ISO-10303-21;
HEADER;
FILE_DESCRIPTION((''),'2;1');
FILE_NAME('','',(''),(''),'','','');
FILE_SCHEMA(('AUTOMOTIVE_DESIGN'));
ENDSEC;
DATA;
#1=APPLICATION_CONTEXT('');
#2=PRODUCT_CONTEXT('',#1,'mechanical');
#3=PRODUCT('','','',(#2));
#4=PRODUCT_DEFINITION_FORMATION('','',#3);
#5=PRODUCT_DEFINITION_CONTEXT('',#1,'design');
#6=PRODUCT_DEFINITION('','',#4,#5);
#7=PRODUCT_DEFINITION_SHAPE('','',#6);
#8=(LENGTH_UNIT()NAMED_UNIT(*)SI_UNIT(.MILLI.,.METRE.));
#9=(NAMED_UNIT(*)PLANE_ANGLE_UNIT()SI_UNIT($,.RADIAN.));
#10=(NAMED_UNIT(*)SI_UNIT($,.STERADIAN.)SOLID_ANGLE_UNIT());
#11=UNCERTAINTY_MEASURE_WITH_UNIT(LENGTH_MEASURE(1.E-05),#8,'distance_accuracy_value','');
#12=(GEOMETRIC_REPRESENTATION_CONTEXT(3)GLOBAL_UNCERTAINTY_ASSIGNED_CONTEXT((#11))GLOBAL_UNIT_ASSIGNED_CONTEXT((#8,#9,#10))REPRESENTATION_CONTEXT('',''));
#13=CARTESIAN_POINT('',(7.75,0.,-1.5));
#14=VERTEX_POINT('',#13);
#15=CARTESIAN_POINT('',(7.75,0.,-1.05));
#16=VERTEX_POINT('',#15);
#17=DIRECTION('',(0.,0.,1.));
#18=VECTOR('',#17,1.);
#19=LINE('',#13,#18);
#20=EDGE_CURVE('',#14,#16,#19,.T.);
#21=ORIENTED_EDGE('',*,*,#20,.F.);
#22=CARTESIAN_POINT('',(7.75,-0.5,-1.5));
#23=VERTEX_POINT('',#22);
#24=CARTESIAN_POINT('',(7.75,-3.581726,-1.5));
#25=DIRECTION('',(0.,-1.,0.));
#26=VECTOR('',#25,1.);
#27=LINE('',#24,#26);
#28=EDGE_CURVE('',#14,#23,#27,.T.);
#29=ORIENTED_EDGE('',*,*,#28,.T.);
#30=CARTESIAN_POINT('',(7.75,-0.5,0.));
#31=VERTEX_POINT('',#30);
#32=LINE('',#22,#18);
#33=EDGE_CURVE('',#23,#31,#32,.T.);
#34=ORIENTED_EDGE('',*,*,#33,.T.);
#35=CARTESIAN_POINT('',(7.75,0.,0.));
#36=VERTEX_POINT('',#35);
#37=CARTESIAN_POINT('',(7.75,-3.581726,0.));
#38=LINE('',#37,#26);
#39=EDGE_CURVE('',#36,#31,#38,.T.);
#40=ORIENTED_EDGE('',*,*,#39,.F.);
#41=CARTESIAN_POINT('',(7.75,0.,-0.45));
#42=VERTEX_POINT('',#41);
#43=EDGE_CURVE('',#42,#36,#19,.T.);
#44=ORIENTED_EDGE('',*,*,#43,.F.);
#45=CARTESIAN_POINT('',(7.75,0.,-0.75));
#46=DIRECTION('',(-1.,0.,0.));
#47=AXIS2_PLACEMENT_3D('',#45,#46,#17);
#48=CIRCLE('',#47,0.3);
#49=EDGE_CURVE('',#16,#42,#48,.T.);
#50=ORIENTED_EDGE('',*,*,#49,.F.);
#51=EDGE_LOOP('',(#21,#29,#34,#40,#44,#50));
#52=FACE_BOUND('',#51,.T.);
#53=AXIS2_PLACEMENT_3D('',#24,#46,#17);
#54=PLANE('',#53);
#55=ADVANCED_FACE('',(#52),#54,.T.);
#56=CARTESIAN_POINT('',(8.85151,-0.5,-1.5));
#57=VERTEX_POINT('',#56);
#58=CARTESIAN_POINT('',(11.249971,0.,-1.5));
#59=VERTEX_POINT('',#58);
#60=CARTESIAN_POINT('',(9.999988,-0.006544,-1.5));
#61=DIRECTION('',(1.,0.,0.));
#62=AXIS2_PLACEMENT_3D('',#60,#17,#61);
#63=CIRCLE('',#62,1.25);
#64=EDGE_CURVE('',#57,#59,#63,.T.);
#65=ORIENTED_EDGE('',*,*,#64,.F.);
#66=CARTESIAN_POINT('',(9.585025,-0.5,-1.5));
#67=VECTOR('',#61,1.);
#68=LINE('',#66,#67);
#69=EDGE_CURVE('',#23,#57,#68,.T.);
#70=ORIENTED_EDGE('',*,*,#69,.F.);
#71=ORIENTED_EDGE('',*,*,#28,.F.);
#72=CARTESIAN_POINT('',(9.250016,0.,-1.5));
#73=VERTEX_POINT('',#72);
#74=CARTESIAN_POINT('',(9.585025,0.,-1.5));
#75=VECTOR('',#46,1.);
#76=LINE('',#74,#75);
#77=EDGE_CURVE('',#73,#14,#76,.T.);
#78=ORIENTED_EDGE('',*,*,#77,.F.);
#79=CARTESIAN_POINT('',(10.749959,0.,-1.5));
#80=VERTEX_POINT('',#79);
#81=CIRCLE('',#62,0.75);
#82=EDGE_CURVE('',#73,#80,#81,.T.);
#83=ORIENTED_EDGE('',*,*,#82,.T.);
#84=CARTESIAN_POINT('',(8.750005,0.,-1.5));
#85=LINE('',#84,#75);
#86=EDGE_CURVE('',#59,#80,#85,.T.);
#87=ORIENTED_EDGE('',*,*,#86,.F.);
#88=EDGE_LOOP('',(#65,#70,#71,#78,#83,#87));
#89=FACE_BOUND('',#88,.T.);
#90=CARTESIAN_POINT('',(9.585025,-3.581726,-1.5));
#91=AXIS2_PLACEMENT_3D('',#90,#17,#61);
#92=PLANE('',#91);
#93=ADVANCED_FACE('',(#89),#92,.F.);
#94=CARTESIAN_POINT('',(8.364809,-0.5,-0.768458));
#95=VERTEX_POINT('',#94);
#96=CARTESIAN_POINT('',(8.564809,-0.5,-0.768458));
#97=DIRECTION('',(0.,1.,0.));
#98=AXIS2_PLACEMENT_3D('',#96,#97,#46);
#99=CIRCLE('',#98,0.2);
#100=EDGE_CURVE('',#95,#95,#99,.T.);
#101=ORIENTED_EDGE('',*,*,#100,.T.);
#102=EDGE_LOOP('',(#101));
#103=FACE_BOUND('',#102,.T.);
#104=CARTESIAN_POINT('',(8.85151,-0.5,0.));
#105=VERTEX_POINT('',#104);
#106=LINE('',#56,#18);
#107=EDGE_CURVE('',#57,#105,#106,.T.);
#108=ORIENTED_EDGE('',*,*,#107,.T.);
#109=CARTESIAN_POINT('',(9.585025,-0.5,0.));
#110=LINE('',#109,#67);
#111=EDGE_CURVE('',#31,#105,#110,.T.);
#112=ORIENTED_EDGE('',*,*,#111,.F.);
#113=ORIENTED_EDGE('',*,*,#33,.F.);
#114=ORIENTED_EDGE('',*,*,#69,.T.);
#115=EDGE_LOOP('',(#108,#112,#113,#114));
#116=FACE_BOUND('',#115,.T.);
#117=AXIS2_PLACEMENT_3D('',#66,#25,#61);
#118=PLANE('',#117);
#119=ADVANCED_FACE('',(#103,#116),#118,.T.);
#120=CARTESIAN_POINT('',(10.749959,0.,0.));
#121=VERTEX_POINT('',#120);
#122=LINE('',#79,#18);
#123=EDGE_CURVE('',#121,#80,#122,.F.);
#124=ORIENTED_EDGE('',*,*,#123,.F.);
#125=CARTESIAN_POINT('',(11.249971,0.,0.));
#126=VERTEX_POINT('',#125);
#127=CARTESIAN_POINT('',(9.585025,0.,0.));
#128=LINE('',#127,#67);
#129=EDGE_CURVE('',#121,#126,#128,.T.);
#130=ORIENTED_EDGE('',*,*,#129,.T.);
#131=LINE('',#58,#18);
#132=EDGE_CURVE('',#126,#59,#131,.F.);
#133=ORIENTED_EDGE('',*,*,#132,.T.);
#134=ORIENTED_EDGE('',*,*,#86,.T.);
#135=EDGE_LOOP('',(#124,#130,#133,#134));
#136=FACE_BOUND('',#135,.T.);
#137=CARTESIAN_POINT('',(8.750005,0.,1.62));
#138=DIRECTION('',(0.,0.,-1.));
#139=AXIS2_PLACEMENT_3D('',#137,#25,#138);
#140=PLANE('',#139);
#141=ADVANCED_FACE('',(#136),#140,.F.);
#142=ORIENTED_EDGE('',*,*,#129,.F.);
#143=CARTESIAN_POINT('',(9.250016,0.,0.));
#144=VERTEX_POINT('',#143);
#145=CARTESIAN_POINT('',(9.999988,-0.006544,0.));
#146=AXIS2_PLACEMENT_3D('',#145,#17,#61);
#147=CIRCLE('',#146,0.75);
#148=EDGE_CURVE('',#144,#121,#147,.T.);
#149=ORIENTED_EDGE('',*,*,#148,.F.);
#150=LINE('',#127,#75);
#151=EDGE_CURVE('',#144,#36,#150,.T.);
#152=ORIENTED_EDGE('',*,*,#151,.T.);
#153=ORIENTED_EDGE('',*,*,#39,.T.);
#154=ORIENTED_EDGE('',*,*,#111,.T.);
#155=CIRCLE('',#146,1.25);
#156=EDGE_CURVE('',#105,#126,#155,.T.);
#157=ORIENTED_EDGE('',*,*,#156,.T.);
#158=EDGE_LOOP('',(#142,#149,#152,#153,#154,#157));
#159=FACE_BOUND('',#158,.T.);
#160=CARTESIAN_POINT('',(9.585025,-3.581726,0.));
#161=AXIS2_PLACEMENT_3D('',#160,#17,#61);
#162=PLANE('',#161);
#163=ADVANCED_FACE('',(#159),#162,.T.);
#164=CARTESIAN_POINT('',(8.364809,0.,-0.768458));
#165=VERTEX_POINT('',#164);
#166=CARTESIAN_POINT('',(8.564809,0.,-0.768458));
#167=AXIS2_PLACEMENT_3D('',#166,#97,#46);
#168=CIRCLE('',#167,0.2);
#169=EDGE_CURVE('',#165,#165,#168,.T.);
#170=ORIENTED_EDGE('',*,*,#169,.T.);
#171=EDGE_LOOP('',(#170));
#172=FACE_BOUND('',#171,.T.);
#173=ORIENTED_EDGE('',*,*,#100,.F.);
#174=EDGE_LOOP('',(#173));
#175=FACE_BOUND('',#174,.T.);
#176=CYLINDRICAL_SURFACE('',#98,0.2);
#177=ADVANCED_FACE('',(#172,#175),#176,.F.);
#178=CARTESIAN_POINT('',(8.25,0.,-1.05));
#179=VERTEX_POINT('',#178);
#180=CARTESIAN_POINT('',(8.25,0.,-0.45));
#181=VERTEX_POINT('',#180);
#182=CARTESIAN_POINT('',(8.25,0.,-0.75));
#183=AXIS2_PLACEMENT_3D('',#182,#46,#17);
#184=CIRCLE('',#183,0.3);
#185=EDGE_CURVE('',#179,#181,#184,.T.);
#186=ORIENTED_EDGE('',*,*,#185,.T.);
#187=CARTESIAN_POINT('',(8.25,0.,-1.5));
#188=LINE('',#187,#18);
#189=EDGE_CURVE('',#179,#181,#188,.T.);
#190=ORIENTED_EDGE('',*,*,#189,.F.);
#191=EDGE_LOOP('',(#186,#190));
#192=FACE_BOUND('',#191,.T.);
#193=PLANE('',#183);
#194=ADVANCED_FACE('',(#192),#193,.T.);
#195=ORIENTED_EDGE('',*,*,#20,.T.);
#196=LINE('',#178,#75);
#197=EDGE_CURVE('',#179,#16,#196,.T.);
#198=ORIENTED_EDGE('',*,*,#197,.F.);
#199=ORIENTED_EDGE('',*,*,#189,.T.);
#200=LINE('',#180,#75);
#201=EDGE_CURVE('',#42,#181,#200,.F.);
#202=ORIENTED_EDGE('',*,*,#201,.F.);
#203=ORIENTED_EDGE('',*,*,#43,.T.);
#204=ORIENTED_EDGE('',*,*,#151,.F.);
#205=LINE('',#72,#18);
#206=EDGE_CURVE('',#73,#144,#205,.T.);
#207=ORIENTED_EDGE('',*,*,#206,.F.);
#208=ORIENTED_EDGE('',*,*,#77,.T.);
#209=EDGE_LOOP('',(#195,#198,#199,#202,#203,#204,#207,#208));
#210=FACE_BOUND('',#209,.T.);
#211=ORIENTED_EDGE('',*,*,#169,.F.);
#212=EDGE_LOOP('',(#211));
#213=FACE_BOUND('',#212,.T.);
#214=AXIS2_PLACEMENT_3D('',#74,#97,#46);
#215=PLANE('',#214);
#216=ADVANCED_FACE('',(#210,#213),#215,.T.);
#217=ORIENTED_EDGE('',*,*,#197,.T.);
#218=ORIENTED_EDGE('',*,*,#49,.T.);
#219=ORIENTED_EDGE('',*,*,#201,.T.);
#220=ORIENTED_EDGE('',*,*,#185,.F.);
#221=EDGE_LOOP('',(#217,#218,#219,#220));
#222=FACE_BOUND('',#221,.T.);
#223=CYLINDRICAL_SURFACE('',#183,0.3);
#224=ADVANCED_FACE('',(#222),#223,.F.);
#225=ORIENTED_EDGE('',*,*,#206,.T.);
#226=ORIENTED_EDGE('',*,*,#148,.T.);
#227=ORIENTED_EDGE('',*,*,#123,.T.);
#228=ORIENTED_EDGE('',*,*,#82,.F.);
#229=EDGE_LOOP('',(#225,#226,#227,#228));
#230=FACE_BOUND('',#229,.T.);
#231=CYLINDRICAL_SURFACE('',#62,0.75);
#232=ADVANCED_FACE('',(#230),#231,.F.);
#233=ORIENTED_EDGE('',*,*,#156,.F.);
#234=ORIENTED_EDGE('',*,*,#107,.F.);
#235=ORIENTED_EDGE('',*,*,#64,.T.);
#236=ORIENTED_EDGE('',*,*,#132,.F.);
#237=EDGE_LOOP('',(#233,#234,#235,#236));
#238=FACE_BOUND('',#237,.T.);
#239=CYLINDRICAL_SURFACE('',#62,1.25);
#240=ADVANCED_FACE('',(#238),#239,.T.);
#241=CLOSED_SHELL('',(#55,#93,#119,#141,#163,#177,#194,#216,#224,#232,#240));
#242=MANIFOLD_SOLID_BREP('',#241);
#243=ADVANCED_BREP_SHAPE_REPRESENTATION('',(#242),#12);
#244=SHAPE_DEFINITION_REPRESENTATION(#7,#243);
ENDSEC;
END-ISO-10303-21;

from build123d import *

# Parameters (mm, degrees)
EXTRUDE_START       = -1.5
EXTRUDE_1_OUTLINE_R = 0.75
EXTRUDE_1_DEPTH     = 1.5
SKETCH_3_R          = 0.3
CUT_EXTRUDE_1_DEPTH = 0.5
SKETCH_4_R          = 0.2
CUT_EXTRUDE_2_DEPTH = 0.5
SKETCH_5_W          = 3.047212849
SKETCH_5_H          = 1.728243789
CUT_EXTRUDE_3_DEPTH = 3.12


# Read off the part's stored shape, not the designer's step: 凸台-拉伸1
with BuildPart() as part:
    # 凸台-拉伸1 outline → 凸台-拉伸1 (new body)
    with BuildSketch(Plane.XY.offset(EXTRUDE_START)):
        with BuildLine():
            Line((7.75, 0), (7.75, -0.5))
            Line((7.75, -0.5), (8.851510108, -0.5))
            ThreePointArc((8.851510108, -0.5), (11.224999287, 0.242146363), (8.750004894, 0))
            Line((8.750004894, 0), (7.75, 0))
        make_face()
        with Locations((9.999987765, -0.006543751)):
            Circle(EXTRUDE_1_OUTLINE_R, mode=Mode.SUBTRACT)
    extrude(amount=EXTRUDE_1_DEPTH)

    # 草图3 → 切除-拉伸1 (cut)
    with BuildSketch(Plane.ZY.offset(-7.75)):
        with Locations((-0.75, 0)):
            Circle(SKETCH_3_R)
    extrude(amount=-CUT_EXTRUDE_1_DEPTH, mode=Mode.SUBTRACT)

    # 草图4 → 切除-拉伸2 (cut)
    with BuildSketch(Plane(origin=(0, 0, 0), x_dir=(1, 0, 0), z_dir=(0, 1, 0))):
        with Locations(Location((8.564809318, 0.768458185, 0), (0, 0, 180))):
            Circle(SKETCH_4_R)
    extrude(amount=-CUT_EXTRUDE_2_DEPTH, mode=Mode.SUBTRACT)

    # 草图5 → 切除-拉伸3 (cut)
    with BuildSketch(Plane(origin=(0, 0, -1.5), x_dir=(-1, 0, 0), z_dir=(0, 0, -1))):
        with Locations((-10.273611319, 0.864121895)):
            Rectangle(SKETCH_5_W, SKETCH_5_H)
    extrude(amount=-CUT_EXTRUDE_3_DEPTH, mode=Mode.SUBTRACT)


solid = part.part
